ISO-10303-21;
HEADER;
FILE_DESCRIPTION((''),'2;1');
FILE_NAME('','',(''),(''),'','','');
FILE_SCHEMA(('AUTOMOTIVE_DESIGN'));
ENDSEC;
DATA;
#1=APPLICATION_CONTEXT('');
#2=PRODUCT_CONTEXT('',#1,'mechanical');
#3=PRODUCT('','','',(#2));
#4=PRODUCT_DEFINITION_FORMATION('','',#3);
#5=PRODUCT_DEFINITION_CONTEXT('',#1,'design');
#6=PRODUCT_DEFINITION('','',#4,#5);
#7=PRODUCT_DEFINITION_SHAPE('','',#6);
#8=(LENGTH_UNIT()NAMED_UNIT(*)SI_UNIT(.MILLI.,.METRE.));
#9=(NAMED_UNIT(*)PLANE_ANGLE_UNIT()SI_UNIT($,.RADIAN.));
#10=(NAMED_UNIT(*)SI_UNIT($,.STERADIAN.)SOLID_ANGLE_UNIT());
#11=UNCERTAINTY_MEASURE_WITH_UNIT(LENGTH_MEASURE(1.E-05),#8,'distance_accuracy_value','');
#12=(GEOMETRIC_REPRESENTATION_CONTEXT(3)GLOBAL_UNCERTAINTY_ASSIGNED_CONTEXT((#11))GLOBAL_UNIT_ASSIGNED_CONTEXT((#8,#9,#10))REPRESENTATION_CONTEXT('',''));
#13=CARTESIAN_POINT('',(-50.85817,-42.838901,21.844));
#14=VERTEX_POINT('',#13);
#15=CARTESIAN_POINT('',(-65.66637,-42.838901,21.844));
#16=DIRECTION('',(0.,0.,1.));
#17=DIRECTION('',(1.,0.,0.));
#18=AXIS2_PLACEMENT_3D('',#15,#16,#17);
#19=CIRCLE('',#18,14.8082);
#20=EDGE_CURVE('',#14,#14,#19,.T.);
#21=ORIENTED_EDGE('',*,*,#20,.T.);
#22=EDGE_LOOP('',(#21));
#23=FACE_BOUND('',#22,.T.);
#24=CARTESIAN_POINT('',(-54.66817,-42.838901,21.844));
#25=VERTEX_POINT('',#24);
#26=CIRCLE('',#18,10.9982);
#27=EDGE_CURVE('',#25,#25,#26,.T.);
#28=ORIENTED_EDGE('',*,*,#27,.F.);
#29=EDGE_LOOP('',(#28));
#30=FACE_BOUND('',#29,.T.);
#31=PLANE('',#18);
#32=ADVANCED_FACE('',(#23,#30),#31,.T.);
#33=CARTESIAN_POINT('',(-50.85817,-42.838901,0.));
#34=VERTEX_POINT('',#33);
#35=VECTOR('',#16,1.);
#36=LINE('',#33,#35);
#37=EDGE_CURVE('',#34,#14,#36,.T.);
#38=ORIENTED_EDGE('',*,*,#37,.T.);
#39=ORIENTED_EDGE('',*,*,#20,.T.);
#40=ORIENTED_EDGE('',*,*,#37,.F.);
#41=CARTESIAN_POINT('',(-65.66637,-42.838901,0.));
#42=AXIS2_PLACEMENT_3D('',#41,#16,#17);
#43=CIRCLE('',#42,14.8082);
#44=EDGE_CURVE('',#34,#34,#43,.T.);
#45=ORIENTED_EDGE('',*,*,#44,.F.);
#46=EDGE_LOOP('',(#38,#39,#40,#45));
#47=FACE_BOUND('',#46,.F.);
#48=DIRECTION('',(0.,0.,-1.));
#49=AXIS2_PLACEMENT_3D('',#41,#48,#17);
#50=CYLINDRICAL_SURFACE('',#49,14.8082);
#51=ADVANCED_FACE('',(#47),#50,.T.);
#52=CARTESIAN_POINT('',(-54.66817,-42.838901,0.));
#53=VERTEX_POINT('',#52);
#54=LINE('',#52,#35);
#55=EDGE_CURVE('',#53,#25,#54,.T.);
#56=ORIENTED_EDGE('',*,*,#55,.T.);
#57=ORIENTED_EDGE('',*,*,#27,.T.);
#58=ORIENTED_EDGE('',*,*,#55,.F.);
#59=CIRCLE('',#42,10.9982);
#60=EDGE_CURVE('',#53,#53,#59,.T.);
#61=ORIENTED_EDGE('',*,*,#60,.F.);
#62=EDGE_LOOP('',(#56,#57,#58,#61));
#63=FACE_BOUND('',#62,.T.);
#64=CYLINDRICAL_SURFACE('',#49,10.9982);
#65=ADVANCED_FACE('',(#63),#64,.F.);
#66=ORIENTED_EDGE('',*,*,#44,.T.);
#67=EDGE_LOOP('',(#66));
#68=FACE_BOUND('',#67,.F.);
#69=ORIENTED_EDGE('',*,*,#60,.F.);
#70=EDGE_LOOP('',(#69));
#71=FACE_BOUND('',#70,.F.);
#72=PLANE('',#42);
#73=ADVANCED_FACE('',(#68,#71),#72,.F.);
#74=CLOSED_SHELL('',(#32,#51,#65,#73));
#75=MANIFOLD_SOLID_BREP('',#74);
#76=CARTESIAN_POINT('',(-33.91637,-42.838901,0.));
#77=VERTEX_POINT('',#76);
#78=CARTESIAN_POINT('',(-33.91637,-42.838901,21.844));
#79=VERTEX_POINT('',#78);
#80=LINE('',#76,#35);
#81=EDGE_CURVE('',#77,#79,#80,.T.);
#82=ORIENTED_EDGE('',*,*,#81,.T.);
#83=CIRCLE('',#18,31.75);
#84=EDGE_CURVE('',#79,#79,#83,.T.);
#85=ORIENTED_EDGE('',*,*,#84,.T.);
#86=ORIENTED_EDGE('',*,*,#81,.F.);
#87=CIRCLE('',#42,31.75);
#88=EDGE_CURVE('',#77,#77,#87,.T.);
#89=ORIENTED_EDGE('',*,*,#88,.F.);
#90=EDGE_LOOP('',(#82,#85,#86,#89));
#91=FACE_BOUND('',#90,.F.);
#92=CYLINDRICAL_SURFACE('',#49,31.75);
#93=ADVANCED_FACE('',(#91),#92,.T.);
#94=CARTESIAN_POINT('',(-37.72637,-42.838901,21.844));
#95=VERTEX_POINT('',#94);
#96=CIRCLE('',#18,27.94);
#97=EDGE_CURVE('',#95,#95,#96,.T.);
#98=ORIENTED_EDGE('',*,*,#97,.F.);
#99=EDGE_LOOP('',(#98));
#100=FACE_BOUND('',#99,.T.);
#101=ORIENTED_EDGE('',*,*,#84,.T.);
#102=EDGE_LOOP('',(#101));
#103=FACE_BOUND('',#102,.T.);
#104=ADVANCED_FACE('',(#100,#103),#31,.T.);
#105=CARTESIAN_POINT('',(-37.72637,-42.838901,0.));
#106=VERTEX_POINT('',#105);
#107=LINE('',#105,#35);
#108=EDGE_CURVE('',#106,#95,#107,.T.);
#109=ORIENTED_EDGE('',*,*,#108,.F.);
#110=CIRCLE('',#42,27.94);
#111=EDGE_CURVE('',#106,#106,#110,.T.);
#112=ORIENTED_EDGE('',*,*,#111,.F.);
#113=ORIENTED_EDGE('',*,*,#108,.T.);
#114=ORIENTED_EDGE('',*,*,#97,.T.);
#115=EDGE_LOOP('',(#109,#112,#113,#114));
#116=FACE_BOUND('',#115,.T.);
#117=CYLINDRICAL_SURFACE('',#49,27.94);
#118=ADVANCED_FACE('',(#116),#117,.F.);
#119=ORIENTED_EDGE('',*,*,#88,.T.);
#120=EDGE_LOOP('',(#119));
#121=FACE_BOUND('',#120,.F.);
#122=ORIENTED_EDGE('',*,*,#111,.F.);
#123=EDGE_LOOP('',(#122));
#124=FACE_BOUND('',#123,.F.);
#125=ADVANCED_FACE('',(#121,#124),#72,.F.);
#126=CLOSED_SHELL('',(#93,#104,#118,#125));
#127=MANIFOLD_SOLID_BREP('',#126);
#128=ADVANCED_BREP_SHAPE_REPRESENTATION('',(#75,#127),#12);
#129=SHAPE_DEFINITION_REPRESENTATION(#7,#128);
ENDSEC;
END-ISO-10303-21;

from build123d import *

# Parameters (mm, degrees)
F0_R     = 31.75
F0_R_2   = 27.94
F1_DEPTH = 21.844
F0_R_3   = 14.8082
F0_R_4   = 10.9982


# Not quite as in the source:
# - a feature names something its author has since deleted; it is built from what else it names


with BuildPart() as f1:
    # F0 (on Top) → F1 (new body)
    with BuildSketch(Plane.XY):
        with Locations((-65.6663700938, -42.8389012814)):
            Circle(F0_R)
        with Locations((-65.6663700938, -42.8389012814)):
            Circle(F0_R_2, mode=Mode.SUBTRACT)
    extrude(amount=F1_DEPTH)


with BuildPart() as f1b:
    # F0 (on Top) → F1, piece 2 (new body)
    with BuildSketch(Plane.XY):
        with Locations((-65.6663700938, -42.8389012814)):
            Circle(F0_R_3)
        with Locations((-65.6663700938, -42.8389012814)):
            Circle(F0_R_4, mode=Mode.SUBTRACT)
    extrude(amount=F1_DEPTH)


solid = Compound([f1.part, f1b.part])
